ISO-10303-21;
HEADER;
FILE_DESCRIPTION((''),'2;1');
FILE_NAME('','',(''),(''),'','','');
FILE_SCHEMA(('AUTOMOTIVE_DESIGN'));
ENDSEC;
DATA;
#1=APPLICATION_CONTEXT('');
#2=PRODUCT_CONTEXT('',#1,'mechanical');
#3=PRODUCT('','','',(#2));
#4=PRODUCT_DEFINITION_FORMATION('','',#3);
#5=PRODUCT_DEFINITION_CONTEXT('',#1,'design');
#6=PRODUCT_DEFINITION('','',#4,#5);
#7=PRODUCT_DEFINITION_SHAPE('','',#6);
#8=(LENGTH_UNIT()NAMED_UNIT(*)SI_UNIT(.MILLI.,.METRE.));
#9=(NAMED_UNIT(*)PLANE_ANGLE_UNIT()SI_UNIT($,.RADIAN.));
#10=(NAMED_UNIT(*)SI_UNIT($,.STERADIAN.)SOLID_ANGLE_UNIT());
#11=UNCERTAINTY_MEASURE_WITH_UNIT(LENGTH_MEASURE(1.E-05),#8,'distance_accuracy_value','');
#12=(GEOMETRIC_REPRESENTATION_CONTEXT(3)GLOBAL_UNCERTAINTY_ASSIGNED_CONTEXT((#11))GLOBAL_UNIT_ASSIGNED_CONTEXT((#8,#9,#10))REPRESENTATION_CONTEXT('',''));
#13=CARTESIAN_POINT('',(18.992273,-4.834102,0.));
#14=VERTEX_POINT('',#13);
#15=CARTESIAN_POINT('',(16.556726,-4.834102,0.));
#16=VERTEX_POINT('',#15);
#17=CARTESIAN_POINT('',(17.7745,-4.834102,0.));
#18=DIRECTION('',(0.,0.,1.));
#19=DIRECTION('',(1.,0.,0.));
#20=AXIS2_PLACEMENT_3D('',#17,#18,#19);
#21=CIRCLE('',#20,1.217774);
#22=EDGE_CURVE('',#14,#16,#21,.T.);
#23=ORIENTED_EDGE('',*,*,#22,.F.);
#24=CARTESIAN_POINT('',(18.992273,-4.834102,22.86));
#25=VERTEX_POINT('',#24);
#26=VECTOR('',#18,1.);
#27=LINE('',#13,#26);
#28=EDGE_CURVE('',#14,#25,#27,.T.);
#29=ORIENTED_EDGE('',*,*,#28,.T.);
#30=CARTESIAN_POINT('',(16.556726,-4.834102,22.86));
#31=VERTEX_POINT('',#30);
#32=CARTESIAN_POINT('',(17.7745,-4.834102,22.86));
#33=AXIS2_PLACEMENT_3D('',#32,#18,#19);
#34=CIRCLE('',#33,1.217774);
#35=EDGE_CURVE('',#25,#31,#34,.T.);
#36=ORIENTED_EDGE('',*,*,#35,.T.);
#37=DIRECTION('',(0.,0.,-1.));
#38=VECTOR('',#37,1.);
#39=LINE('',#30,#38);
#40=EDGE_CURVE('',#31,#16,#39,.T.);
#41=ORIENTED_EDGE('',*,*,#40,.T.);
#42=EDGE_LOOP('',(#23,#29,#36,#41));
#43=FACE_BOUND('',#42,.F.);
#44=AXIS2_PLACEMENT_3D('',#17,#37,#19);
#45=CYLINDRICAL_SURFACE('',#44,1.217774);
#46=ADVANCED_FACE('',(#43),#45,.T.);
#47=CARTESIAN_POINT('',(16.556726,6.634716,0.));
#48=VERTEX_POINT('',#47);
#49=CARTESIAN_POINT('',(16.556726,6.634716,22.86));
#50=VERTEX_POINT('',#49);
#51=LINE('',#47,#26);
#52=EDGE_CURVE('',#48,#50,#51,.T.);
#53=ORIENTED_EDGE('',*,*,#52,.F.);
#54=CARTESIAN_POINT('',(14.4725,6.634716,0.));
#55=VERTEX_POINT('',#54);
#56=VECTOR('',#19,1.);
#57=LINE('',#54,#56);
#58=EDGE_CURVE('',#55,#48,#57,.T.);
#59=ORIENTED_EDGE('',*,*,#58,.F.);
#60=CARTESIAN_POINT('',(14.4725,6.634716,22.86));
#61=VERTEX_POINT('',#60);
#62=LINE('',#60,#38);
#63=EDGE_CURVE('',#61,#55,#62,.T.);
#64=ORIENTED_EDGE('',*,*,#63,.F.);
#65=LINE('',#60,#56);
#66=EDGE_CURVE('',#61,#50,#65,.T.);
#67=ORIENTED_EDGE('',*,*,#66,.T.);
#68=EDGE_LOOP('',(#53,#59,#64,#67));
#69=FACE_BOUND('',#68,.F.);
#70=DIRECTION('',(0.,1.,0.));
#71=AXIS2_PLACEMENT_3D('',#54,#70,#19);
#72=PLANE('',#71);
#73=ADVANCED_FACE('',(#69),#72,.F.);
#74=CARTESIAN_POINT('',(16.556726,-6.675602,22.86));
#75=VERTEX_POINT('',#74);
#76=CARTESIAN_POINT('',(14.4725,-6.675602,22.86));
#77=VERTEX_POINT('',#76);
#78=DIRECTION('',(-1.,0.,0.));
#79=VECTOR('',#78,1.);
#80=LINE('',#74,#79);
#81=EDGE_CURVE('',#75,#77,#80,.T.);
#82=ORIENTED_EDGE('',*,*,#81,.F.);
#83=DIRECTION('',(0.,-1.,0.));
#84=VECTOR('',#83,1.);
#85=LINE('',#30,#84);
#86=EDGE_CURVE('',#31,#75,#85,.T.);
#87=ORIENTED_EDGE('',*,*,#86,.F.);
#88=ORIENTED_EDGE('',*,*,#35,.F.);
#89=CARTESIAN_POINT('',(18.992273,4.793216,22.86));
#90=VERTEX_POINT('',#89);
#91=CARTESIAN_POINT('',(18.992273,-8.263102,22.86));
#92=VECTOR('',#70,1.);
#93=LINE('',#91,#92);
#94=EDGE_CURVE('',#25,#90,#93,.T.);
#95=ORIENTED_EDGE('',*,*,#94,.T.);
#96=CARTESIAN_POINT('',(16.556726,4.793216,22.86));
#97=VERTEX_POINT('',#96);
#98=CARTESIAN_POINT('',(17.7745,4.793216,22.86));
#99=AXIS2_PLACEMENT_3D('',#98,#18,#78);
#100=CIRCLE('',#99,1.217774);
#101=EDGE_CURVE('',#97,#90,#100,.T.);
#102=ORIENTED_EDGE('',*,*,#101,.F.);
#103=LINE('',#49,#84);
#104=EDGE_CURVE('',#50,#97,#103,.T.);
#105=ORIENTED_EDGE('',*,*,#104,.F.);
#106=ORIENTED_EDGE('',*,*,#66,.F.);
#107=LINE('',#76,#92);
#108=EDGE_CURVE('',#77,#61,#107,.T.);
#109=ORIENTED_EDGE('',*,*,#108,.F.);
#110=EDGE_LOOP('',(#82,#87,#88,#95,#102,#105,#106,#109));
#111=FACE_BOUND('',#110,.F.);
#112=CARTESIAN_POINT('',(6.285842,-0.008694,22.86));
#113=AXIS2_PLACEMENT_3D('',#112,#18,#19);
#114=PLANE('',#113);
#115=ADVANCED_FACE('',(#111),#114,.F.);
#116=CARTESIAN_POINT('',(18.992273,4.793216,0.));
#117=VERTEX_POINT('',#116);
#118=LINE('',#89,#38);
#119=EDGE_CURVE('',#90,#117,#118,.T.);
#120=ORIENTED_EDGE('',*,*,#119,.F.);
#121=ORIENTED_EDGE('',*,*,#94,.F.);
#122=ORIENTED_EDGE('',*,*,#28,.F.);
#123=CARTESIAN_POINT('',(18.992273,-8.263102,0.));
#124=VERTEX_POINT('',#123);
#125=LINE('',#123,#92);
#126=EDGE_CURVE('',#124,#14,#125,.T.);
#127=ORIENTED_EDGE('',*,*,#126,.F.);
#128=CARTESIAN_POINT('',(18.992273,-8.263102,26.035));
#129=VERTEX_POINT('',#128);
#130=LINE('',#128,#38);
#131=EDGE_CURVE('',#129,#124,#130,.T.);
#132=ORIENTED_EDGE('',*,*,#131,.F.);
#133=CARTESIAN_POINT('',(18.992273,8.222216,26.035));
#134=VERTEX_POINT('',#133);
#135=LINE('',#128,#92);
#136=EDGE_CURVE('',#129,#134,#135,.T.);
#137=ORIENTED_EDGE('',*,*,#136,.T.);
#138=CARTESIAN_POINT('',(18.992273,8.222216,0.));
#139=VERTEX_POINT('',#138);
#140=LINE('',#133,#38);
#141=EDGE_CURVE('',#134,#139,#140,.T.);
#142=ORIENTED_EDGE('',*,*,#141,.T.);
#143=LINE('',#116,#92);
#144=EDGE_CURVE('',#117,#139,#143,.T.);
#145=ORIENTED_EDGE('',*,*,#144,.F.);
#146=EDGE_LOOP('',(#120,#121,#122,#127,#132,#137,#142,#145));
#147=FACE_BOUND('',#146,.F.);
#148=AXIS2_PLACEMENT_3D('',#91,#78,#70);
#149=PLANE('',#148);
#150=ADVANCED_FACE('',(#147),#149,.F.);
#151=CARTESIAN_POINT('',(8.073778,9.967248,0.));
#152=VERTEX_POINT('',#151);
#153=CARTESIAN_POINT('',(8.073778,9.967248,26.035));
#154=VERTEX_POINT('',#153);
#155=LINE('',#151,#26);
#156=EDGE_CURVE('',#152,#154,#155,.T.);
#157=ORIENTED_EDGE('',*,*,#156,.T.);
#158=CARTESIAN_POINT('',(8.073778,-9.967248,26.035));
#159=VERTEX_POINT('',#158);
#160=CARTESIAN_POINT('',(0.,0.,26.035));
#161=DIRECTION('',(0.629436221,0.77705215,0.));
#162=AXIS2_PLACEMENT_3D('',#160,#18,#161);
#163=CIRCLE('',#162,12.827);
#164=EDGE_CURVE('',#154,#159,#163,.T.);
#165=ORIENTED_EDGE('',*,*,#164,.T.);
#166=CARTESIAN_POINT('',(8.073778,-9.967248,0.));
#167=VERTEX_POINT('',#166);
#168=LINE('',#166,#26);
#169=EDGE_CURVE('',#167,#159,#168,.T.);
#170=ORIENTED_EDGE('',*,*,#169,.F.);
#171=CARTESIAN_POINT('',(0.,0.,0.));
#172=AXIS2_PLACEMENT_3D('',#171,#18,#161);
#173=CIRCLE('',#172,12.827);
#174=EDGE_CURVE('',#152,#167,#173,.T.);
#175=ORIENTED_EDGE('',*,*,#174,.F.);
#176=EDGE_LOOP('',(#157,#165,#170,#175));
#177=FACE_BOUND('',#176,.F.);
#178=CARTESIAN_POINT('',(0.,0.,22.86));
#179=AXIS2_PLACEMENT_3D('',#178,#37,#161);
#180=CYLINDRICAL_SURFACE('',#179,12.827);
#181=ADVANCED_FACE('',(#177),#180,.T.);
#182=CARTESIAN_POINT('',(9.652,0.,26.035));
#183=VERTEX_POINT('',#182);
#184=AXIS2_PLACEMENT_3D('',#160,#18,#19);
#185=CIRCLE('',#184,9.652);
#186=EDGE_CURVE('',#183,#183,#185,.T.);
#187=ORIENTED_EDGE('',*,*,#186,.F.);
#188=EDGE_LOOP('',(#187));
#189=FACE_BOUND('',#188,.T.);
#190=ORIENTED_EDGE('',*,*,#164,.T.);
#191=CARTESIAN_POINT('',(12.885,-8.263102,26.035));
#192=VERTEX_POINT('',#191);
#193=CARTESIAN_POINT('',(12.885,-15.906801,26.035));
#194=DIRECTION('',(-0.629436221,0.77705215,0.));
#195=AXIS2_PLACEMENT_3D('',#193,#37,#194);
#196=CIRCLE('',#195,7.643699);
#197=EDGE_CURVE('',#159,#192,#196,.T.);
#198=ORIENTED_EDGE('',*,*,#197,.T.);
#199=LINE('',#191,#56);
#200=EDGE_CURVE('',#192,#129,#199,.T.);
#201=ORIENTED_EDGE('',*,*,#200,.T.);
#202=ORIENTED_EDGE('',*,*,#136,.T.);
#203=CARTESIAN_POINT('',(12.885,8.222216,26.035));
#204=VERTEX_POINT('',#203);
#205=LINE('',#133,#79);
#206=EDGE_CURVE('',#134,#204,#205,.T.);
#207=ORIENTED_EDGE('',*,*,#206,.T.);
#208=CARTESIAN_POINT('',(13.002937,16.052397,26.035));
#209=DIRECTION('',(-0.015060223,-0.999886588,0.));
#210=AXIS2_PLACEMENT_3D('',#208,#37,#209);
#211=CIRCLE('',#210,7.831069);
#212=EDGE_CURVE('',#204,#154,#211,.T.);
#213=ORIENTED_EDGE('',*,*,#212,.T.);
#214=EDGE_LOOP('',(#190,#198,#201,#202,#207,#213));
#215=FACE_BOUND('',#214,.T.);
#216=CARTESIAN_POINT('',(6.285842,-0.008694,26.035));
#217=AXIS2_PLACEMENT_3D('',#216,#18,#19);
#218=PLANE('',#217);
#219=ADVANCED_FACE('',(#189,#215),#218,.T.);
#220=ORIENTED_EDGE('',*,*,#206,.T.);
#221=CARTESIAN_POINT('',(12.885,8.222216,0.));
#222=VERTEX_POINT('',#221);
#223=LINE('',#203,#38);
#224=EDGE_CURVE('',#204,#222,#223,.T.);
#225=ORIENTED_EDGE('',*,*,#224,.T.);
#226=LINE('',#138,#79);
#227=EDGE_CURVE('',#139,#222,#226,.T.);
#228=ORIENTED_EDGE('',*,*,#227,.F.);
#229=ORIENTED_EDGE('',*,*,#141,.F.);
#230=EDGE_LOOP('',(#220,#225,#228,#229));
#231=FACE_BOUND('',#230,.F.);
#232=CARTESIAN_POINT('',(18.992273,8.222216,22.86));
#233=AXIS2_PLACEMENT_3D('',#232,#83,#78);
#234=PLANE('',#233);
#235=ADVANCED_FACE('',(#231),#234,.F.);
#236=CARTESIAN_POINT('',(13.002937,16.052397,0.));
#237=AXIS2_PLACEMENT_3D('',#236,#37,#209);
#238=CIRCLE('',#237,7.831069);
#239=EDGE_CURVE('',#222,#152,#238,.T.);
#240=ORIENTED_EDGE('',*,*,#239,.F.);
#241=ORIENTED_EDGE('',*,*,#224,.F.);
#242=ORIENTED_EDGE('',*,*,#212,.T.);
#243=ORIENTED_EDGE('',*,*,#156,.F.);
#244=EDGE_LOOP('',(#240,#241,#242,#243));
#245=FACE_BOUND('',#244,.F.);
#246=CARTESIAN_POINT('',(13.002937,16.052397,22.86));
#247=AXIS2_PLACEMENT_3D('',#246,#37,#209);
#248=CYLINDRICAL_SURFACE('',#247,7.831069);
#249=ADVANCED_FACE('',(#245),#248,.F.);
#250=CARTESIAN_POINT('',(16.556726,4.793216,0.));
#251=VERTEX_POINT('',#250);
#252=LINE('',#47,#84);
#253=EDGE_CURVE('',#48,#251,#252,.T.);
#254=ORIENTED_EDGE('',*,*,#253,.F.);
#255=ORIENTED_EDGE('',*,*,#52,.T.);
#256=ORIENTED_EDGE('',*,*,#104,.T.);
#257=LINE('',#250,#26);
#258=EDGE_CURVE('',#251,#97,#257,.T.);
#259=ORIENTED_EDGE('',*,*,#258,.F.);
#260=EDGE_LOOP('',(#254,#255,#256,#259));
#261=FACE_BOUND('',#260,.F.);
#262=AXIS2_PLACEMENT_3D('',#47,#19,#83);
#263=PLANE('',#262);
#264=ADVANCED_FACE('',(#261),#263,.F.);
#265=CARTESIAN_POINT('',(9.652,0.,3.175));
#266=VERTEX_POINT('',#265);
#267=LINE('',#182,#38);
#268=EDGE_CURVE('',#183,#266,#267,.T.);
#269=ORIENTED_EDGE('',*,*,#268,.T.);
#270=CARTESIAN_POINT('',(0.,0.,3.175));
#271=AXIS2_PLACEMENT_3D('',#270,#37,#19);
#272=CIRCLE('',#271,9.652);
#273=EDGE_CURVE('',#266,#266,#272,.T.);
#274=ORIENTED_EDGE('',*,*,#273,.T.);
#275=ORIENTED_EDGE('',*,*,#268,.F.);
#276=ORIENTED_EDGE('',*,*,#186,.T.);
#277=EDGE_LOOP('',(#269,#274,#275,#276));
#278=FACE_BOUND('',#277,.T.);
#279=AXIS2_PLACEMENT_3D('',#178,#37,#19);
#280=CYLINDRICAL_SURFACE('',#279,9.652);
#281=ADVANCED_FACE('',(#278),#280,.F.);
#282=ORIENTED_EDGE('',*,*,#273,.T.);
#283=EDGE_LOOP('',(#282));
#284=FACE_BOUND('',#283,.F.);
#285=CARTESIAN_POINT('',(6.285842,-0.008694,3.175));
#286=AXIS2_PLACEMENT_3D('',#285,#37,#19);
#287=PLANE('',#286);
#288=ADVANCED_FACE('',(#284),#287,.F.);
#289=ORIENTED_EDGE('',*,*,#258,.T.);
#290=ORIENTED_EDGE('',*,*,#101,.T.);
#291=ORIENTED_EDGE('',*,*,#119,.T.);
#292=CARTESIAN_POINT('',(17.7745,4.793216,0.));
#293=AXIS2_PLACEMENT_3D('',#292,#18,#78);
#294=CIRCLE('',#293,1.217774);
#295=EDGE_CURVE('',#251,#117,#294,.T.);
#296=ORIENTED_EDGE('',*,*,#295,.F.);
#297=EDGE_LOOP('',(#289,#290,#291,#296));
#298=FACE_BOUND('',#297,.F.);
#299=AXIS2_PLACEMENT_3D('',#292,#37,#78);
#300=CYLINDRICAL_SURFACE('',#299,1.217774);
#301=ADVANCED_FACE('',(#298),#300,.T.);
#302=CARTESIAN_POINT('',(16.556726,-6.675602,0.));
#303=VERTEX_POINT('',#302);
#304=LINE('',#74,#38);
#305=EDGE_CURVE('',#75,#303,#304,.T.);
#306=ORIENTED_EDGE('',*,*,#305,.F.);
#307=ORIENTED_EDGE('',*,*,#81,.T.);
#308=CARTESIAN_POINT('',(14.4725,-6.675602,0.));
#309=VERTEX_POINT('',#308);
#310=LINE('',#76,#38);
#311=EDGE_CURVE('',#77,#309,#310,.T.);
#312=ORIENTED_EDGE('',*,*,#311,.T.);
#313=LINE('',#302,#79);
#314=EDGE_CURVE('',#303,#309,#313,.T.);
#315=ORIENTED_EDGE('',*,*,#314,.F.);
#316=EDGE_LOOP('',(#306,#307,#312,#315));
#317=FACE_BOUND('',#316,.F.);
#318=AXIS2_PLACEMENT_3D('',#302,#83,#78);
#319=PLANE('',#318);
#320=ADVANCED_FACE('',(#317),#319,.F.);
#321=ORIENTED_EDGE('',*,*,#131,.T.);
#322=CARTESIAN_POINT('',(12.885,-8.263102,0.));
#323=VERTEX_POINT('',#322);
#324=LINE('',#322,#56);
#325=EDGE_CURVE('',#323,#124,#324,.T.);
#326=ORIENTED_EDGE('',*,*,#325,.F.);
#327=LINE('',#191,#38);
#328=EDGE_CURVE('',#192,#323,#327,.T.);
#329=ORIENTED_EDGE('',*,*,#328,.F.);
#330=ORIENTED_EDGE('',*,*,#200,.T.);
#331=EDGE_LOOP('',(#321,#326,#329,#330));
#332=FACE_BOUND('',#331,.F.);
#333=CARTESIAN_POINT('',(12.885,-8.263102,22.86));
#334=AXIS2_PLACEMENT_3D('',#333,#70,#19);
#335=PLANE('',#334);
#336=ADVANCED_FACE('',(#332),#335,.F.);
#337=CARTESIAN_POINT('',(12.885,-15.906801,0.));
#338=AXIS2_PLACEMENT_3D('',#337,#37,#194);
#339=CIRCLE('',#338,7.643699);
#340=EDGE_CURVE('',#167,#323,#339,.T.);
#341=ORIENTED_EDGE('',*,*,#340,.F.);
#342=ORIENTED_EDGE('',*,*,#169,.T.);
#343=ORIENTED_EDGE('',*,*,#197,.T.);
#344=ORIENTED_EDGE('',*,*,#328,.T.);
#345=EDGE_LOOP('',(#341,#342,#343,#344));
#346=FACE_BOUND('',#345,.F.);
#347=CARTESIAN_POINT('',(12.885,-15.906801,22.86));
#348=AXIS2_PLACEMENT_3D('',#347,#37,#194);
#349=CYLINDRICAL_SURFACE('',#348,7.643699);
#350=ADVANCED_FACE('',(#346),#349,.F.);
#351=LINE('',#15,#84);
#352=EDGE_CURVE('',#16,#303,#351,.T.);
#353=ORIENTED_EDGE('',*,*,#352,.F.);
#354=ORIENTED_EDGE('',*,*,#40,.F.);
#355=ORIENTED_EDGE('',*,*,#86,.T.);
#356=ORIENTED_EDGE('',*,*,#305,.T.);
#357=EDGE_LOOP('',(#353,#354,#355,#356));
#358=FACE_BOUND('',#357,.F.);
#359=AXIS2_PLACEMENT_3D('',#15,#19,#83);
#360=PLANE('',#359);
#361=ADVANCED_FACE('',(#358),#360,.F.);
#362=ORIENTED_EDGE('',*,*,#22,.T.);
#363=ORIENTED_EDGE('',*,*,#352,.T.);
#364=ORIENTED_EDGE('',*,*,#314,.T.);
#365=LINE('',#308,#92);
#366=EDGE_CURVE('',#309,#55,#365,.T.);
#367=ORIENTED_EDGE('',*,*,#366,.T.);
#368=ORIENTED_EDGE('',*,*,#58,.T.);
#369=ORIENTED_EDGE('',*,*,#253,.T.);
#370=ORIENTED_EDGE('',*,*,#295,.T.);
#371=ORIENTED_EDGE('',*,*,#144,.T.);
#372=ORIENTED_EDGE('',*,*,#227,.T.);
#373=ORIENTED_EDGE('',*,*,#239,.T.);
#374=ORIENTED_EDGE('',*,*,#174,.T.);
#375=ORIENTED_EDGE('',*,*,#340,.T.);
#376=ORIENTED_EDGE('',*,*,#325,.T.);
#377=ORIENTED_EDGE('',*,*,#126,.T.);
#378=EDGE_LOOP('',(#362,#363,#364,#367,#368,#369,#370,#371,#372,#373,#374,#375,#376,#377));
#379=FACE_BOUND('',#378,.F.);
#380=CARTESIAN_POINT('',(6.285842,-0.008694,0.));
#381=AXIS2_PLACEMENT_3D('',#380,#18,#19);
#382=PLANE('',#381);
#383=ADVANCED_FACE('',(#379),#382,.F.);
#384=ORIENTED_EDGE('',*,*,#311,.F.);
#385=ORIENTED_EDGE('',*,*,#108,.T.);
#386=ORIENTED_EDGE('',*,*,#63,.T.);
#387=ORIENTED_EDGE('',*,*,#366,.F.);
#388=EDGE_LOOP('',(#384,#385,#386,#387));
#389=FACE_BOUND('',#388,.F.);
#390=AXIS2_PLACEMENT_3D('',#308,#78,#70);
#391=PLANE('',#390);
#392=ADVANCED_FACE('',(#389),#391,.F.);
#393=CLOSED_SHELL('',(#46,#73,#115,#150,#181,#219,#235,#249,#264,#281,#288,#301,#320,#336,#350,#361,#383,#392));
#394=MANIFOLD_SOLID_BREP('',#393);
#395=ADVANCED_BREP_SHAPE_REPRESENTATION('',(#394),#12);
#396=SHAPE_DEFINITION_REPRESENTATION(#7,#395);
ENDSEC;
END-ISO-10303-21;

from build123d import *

# Parameters (mm, degrees)
F0_R     = 9.652
F1_DEPTH = 22.86
F2_R     = 9.652
F3_DEPTH = 3.175
F4_R     = 9.652
F5_DEPTH = 3.175


with BuildPart() as f1:
    # F0 (on Top) → F1 (new body)
    with BuildSketch(Plane.XY):
        with BuildLine():
            Line((14.4724995292, -6.4216016291), (14.4724995292, 6.2783983709))
            Line((14.4724995292, 6.2783983709), (14.4724995292, 6.6347159585))
            Line((14.4724995292, 6.6347159585), (14.5994995292, 6.6347159585))
            Line((14.5994995292, 6.6347159585), (16.1869995292, 6.6347159585))
            Line((16.1869995292, 6.6347159585), (16.5567258399, 6.6347159585))
            Line((16.5567258399, 6.6347159585), (16.5567258399, 4.7932159585))
            ThreePointArc((16.5567258399, 4.7932159585), (17.7744995292, 3.5754422692), (18.9922732184, 4.7932159585))
            Line((18.9922732184, 4.7932159585), (18.9922732184, 6.6347159585))
            Line((18.9922732184, 6.6347159585), (18.9922732184, 8.2222159585))
            Line((18.9922732184, 8.2222159585), (14.4724995292, 8.2222159585))
            Line((14.4724995292, 8.2222159585), (12.8849995292, 8.2222159585))
            ThreePointArc((12.8849995292, 8.2222159585), (10.3328098948, 8.6905993264), (8.0737784074, 9.9672479265))
            ThreePointArc((8.0737784074, 9.9672479265), (-12.827, 0), (8.0737784074, -9.9672479265))
            ThreePointArc((8.0737784074, -9.9672479265), (10.3329433344, -8.7017229937), (12.8849995292, -8.2631016291))
            Line((12.8849995292, -8.2631016291), (14.4724995292, -8.2631016291))
            Line((14.4724995292, -8.2631016291), (18.9922732184, -8.2631016291))
            Line((18.9922732184, -8.2631016291), (18.9922732184, -6.6756016291))
            Line((18.9922732184, -6.6756016291), (18.9922732184, -4.8341016291))
            ThreePointArc((18.9922732184, -4.8341016291), (17.7744995292, -3.6163279398), (16.5567258399, -4.8341016291))
            Line((16.5567258399, -4.8341016291), (16.5567258399, -6.6756016291))
            Line((16.5567258399, -6.6756016291), (16.1869995292, -6.6756016291))
            Line((16.1869995292, -6.6756016291), (14.4724995292, -6.6756016291))
            Line((14.4724995292, -6.6756016291), (14.4724995292, -6.4216016291))
        make_face()
        Circle(F0_R, mode=Mode.SUBTRACT)
    extrude(amount=F1_DEPTH)

    # F2 (on face) → F3 (join)
    with BuildSketch(Plane.XY.offset(22.86)):
        with BuildLine():
            ThreePointArc((12.8849995292, 8.2222159585), (10.3328098948, 8.6905993264), (8.0737784074, 9.9672479265))
            ThreePointArc((8.0737784074, 9.9672479265), (-12.827, 0), (8.0737784074, -9.9672479265))
            ThreePointArc((8.0737784074, -9.9672479265), (10.3329433344, -8.7017229937), (12.8849995292, -8.2631016291))
            Line((12.8849995292, -8.2631016291), (18.9922732184, -8.2631016291))
            Line((18.9922732184, -8.2631016291), (18.9922732184, -4.8341016291))
            ThreePointArc((18.9922732184, -4.8341016291), (17.7744995292, -3.6163279398), (16.5567258399, -4.8341016291))
            Line((16.5567258399, -4.8341016291), (16.5567258399, -6.6756016291))
            Line((16.5567258399, -6.6756016291), (14.4724995292, -6.6756016291))
            Line((14.4724995292, -6.6756016291), (14.4724995292, 6.6347159585))
            Line((14.4724995292, 6.6347159585), (16.5567258399, 6.6347159585))
            Line((16.5567258399, 6.6347159585), (16.5567258399, 4.7932159585))
            ThreePointArc((16.5567258399, 4.7932159585), (17.7744995292, 3.5754422692), (18.9922732184, 4.7932159585))
            Line((18.9922732184, 4.7932159585), (18.9922732184, 8.2222159585))
            Line((18.9922732184, 8.2222159585), (12.8849995292, 8.2222159585))
        make_face()
        Circle(F2_R, mode=Mode.SUBTRACT)
        with BuildLine():
            Line((18.9922732184, -4.8341016291), (18.9922732184, 4.7932159585))
            ThreePointArc((18.9922732184, 4.7932159585), (17.7744995292, 3.5754422692), (16.5567258399, 4.7932159585))
            Line((16.5567258399, 4.7932159585), (16.5567258399, 6.6347159585))
            Line((16.5567258399, 6.6347159585), (14.4724995292, 6.6347159585))
            Line((14.4724995292, 6.6347159585), (14.4724995292, -6.6756016291))
            Line((14.4724995292, -6.6756016291), (16.5567258399, -6.6756016291))
            Line((16.5567258399, -6.6756016291), (16.5567258399, -4.8341016291))
            ThreePointArc((16.5567258399, -4.8341016291), (17.7744995292, -3.6163279398), (18.9922732184, -4.8341016291))
        make_face()
    extrude(amount=F3_DEPTH)

    # F4 (on face) → F5 (join)
    with BuildSketch(Plane(origin=(0, 0, 0), x_dir=(1, 0, 0), z_dir=(0, 0, -1))):
        with BuildLine():
            Line((18.9922732184, 8.2631016291), (12.8849995292, 8.2631016291))
            ThreePointArc((12.8849995292, 8.2631016291), (10.3329433344, 8.7017229937), (8.0737784074, 9.9672479265))
            ThreePointArc((8.0737784074, 9.9672479265), (-12.827, 0), (8.0737784074, -9.9672479265))
            ThreePointArc((8.0737784074, -9.9672479265), (10.3328098948, -8.6905993264), (12.8849995292, -8.2222159585))
            Line((12.8849995292, -8.2222159585), (18.9922732184, -8.2222159585))
            Line((18.9922732184, -8.2222159585), (18.9922732184, -4.7932159585))
            ThreePointArc((18.9922732184, -4.7932159585), (17.7744995292, -3.5754422692), (16.5567258399, -4.7932159585))
            Line((16.5567258399, -4.7932159585), (16.5567258399, -6.6347159585))
            Line((16.5567258399, -6.6347159585), (14.4724995292, -6.6347159585))
            Line((14.4724995292, -6.6347159585), (14.4724995292, 6.6756016291))
            Line((14.4724995292, 6.6756016291), (16.5567258399, 6.6756016291))
            Line((16.5567258399, 6.6756016291), (16.5567258399, 4.8341016291))
            ThreePointArc((16.5567258399, 4.8341016291), (17.7744995292, 3.6163279398), (18.9922732184, 4.8341016291))
            Line((18.9922732184, 4.8341016291), (18.9922732184, 8.2631016291))
        make_face()
        Circle(F4_R, mode=Mode.SUBTRACT)
        Circle(F4_R)
    extrude(amount=-F5_DEPTH)


solid = f1.part
